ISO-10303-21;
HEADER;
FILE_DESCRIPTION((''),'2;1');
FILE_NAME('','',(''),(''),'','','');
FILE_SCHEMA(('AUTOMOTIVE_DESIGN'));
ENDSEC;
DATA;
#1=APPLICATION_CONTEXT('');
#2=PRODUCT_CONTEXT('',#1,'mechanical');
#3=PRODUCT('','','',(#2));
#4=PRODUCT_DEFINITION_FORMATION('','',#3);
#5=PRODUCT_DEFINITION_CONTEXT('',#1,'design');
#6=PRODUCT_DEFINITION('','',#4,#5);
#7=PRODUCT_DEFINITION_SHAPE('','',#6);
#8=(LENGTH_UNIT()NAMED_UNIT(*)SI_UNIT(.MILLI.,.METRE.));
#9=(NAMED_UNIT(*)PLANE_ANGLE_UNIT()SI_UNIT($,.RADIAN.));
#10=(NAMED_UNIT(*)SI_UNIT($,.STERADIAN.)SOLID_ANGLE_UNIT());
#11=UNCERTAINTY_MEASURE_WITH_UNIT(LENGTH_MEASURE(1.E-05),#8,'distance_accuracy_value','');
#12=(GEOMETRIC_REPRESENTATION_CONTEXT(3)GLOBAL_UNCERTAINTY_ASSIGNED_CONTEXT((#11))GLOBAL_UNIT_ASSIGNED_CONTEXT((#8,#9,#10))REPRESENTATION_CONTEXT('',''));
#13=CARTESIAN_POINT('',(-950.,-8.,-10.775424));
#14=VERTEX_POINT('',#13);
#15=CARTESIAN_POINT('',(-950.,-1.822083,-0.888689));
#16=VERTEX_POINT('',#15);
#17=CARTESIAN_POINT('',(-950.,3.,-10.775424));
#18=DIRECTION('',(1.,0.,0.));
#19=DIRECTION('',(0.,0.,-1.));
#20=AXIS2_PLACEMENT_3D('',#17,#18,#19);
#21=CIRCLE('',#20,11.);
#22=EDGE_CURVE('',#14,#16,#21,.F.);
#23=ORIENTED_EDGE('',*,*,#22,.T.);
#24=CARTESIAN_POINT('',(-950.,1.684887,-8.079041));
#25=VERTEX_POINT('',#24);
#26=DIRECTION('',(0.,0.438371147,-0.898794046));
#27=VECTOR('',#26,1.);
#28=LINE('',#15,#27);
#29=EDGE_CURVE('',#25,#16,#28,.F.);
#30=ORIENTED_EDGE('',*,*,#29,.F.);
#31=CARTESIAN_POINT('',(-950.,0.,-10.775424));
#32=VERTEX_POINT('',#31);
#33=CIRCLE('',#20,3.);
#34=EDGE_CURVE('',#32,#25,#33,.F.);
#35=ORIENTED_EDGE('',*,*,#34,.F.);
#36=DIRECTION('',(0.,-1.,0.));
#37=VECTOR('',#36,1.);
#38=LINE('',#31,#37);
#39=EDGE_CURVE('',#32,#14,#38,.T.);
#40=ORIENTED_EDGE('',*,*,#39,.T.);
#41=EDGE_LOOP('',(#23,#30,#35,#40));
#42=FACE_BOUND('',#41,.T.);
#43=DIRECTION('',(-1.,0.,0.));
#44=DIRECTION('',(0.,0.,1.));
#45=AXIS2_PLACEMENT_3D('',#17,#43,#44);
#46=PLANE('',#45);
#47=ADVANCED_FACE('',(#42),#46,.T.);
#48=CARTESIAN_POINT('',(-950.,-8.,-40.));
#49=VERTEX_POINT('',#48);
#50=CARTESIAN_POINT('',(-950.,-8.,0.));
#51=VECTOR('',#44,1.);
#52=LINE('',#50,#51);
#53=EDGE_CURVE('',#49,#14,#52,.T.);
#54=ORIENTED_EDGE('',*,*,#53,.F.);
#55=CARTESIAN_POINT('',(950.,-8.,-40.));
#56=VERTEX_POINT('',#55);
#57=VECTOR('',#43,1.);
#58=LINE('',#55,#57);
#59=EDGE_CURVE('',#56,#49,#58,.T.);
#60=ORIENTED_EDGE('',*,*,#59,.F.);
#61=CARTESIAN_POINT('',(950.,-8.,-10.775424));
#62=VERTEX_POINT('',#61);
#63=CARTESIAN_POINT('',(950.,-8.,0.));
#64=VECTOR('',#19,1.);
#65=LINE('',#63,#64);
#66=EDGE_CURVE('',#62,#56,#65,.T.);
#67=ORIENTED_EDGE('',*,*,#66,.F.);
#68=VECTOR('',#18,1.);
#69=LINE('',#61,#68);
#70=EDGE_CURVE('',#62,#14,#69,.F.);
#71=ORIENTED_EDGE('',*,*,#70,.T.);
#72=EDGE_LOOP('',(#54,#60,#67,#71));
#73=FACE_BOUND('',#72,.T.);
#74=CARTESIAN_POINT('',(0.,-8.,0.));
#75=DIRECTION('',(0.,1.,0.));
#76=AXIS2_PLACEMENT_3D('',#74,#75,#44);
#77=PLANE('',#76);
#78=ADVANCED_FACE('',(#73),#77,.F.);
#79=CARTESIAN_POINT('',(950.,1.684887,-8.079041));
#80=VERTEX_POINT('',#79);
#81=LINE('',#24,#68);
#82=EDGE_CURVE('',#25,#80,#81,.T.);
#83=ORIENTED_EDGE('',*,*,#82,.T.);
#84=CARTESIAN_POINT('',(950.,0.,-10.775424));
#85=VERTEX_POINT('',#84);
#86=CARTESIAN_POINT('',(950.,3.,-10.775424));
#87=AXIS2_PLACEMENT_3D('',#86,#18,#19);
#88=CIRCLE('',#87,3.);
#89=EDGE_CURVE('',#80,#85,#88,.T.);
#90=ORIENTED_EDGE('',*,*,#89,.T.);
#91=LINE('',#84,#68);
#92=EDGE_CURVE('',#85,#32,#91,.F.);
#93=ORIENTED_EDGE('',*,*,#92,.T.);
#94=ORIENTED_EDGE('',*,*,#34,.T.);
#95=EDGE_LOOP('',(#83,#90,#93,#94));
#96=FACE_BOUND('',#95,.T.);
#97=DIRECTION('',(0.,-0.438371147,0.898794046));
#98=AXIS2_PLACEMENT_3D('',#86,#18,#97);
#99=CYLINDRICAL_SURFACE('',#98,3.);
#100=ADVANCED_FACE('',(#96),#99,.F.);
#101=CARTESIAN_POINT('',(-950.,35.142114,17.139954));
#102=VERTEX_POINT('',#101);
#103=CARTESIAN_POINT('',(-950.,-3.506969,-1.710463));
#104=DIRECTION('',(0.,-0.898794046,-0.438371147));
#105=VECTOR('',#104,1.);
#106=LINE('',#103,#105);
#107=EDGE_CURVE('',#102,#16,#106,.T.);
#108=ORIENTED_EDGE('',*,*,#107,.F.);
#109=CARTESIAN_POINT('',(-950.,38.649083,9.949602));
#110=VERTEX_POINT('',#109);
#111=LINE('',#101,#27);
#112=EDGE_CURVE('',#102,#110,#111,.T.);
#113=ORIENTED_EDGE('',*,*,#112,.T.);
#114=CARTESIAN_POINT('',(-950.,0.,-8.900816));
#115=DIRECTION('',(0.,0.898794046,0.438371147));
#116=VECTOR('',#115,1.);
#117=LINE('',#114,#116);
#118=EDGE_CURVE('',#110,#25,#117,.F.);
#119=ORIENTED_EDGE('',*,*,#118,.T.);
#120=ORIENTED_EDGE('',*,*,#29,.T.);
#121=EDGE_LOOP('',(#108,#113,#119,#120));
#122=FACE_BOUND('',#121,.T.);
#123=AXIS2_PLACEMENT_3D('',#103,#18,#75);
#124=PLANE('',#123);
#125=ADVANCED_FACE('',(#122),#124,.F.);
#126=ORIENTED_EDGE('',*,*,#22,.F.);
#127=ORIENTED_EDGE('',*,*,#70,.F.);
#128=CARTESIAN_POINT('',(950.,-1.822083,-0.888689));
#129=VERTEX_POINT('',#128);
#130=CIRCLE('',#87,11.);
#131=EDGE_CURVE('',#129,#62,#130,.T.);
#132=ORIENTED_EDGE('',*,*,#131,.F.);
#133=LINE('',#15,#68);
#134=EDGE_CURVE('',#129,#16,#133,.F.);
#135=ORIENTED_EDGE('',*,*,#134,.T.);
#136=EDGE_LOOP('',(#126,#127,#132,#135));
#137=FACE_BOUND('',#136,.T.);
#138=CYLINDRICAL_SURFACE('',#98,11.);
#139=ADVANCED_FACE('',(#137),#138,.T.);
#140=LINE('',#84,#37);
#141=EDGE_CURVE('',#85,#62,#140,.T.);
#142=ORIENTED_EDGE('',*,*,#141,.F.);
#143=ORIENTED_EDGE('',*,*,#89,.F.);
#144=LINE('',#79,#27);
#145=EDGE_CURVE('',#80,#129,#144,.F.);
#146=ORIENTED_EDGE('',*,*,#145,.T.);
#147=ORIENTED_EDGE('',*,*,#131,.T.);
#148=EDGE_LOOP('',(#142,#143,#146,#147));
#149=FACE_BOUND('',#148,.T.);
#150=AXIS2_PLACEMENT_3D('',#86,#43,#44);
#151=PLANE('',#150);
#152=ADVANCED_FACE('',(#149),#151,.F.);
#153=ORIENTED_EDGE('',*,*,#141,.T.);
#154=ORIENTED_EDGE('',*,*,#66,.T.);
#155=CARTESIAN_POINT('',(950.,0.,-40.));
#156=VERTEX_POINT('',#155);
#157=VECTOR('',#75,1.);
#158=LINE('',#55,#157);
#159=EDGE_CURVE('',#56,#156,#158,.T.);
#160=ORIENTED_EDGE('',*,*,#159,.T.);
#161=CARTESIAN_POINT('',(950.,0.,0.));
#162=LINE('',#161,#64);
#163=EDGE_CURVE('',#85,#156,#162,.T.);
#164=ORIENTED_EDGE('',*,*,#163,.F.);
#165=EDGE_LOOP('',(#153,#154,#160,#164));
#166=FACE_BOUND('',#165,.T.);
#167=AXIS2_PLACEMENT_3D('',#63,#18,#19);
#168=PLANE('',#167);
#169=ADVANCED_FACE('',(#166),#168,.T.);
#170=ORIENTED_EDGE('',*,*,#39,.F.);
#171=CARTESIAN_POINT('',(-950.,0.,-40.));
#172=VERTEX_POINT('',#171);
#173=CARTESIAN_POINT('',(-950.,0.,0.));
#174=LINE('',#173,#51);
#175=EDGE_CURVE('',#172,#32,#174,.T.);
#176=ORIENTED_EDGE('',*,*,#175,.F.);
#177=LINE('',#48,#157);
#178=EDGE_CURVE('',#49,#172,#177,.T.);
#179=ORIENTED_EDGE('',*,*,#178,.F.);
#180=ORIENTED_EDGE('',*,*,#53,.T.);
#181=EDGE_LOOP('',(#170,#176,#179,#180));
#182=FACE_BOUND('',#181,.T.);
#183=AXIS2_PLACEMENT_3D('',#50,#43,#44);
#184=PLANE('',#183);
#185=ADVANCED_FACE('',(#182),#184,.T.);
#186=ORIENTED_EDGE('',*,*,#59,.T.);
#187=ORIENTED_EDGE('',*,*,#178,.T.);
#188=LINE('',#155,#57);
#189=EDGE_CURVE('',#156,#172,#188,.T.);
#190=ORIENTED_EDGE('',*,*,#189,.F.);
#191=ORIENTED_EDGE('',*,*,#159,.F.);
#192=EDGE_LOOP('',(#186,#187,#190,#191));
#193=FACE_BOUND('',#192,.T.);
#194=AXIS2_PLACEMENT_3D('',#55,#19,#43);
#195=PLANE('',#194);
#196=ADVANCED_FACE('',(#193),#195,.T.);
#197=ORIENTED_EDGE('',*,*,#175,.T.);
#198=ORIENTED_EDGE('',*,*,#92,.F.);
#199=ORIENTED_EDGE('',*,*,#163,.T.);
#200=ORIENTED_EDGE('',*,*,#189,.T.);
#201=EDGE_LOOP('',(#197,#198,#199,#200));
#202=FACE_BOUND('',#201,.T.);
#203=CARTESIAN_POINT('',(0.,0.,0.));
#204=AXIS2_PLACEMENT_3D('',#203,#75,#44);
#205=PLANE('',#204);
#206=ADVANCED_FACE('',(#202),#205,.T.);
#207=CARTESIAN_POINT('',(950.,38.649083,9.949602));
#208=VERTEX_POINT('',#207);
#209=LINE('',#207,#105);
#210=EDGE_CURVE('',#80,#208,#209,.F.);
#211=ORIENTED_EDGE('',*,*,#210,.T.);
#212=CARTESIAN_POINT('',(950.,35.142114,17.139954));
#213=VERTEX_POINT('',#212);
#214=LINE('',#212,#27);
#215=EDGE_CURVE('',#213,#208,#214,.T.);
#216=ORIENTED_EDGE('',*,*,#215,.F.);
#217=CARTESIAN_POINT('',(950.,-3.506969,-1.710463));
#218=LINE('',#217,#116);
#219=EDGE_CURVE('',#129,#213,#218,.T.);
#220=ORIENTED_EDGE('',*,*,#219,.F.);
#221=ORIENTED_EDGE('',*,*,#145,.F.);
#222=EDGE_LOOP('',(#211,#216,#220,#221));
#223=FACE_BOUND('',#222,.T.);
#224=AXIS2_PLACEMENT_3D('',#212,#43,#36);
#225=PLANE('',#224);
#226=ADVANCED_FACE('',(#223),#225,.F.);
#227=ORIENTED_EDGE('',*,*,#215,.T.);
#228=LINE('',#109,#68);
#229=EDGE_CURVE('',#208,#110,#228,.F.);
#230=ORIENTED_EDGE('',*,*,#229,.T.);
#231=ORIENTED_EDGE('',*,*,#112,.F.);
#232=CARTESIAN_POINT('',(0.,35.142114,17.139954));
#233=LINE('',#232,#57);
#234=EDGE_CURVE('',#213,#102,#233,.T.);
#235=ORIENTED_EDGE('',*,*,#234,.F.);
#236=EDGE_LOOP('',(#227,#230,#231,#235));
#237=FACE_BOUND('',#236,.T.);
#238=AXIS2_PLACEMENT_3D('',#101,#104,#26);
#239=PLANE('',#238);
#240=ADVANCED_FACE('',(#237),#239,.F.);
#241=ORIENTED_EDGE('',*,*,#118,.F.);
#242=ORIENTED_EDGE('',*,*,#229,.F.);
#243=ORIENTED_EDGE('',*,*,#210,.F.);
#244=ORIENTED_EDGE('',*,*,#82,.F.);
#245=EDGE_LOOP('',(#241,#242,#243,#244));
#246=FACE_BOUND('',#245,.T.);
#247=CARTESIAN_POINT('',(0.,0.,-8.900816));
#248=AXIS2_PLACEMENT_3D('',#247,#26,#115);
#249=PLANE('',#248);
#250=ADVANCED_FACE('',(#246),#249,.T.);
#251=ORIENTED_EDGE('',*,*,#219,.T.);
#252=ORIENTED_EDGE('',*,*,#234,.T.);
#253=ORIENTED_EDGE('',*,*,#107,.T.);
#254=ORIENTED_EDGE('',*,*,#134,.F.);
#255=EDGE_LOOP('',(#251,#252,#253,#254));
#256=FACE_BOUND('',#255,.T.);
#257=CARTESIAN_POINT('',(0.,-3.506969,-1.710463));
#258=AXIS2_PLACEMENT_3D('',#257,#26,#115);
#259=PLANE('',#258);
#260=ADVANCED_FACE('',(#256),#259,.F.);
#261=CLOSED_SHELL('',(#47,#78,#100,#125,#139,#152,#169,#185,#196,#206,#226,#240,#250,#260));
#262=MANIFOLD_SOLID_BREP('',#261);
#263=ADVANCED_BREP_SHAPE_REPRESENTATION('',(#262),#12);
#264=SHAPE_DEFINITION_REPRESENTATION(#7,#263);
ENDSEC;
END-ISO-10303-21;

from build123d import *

# Parameters (mm, degrees)
SKETCH2_W            = 1900
SKETCH2_H            = 40
BASE_FLANGE1_DEPTH   = 8
EDGE_FLANGE1_START   = -950
EDGE_FLANGE1_DEPTH   = 1900
EDGE_FLANGE1_2_DEPTH = 1900


# Read off the part's stored shape, not the designer's step: Edge-Flange1
# Sheet-metal steps are written as plain solids
with BuildPart() as part:
    # Sketch2 → Base-Flange1 (new body)
    with BuildSketch(Plane(origin=(0, 0, 0), x_dir=(1, 0, 0), z_dir=(0, 1, 0))):
        with Locations((0, 20)):
            Rectangle(SKETCH2_W, SKETCH2_H)
    extrude(amount=-BASE_FLANGE1_DEPTH)

    # Edge-Flange1 outline → Edge-Flange1 (cut)
    with BuildSketch(Plane.YZ.offset(EDGE_FLANGE1_START)):
        with BuildLine():
            ThreePointArc((-8, -10.77542358), (-6.328529058, -4.946311673), (-1.822082615, -0.88868907))
            Line((-1.822082615, -0.88868907), (0, 0))
            Line((0, 0), (-8, 0))
            Line((-8, 0), (-8, -10.77542358))
        make_face()
    extrude(amount=EDGE_FLANGE1_DEPTH, mode=Mode.SUBTRACT)

    # Edge-Flange1 2 outline → Edge-Flange1 2 (add)
    with BuildSketch(Plane.YZ.offset(EDGE_FLANGE1_START)):
        with BuildLine():
            Line((35.142114222, 17.139954337), (0, 0))
            Line((0, 0), (0, -10.77542358))
            ThreePointArc((0, -10.77542358), (0.455855712, -9.185665787), (1.68488656, -8.079041441))
            Line((1.68488656, -8.079041441), (38.649083397, 9.949601967))
            Line((38.649083397, 9.949601967), (35.142114222, 17.139954337))
        make_face()
    extrude(amount=EDGE_FLANGE1_2_DEPTH)


solid = part.part
